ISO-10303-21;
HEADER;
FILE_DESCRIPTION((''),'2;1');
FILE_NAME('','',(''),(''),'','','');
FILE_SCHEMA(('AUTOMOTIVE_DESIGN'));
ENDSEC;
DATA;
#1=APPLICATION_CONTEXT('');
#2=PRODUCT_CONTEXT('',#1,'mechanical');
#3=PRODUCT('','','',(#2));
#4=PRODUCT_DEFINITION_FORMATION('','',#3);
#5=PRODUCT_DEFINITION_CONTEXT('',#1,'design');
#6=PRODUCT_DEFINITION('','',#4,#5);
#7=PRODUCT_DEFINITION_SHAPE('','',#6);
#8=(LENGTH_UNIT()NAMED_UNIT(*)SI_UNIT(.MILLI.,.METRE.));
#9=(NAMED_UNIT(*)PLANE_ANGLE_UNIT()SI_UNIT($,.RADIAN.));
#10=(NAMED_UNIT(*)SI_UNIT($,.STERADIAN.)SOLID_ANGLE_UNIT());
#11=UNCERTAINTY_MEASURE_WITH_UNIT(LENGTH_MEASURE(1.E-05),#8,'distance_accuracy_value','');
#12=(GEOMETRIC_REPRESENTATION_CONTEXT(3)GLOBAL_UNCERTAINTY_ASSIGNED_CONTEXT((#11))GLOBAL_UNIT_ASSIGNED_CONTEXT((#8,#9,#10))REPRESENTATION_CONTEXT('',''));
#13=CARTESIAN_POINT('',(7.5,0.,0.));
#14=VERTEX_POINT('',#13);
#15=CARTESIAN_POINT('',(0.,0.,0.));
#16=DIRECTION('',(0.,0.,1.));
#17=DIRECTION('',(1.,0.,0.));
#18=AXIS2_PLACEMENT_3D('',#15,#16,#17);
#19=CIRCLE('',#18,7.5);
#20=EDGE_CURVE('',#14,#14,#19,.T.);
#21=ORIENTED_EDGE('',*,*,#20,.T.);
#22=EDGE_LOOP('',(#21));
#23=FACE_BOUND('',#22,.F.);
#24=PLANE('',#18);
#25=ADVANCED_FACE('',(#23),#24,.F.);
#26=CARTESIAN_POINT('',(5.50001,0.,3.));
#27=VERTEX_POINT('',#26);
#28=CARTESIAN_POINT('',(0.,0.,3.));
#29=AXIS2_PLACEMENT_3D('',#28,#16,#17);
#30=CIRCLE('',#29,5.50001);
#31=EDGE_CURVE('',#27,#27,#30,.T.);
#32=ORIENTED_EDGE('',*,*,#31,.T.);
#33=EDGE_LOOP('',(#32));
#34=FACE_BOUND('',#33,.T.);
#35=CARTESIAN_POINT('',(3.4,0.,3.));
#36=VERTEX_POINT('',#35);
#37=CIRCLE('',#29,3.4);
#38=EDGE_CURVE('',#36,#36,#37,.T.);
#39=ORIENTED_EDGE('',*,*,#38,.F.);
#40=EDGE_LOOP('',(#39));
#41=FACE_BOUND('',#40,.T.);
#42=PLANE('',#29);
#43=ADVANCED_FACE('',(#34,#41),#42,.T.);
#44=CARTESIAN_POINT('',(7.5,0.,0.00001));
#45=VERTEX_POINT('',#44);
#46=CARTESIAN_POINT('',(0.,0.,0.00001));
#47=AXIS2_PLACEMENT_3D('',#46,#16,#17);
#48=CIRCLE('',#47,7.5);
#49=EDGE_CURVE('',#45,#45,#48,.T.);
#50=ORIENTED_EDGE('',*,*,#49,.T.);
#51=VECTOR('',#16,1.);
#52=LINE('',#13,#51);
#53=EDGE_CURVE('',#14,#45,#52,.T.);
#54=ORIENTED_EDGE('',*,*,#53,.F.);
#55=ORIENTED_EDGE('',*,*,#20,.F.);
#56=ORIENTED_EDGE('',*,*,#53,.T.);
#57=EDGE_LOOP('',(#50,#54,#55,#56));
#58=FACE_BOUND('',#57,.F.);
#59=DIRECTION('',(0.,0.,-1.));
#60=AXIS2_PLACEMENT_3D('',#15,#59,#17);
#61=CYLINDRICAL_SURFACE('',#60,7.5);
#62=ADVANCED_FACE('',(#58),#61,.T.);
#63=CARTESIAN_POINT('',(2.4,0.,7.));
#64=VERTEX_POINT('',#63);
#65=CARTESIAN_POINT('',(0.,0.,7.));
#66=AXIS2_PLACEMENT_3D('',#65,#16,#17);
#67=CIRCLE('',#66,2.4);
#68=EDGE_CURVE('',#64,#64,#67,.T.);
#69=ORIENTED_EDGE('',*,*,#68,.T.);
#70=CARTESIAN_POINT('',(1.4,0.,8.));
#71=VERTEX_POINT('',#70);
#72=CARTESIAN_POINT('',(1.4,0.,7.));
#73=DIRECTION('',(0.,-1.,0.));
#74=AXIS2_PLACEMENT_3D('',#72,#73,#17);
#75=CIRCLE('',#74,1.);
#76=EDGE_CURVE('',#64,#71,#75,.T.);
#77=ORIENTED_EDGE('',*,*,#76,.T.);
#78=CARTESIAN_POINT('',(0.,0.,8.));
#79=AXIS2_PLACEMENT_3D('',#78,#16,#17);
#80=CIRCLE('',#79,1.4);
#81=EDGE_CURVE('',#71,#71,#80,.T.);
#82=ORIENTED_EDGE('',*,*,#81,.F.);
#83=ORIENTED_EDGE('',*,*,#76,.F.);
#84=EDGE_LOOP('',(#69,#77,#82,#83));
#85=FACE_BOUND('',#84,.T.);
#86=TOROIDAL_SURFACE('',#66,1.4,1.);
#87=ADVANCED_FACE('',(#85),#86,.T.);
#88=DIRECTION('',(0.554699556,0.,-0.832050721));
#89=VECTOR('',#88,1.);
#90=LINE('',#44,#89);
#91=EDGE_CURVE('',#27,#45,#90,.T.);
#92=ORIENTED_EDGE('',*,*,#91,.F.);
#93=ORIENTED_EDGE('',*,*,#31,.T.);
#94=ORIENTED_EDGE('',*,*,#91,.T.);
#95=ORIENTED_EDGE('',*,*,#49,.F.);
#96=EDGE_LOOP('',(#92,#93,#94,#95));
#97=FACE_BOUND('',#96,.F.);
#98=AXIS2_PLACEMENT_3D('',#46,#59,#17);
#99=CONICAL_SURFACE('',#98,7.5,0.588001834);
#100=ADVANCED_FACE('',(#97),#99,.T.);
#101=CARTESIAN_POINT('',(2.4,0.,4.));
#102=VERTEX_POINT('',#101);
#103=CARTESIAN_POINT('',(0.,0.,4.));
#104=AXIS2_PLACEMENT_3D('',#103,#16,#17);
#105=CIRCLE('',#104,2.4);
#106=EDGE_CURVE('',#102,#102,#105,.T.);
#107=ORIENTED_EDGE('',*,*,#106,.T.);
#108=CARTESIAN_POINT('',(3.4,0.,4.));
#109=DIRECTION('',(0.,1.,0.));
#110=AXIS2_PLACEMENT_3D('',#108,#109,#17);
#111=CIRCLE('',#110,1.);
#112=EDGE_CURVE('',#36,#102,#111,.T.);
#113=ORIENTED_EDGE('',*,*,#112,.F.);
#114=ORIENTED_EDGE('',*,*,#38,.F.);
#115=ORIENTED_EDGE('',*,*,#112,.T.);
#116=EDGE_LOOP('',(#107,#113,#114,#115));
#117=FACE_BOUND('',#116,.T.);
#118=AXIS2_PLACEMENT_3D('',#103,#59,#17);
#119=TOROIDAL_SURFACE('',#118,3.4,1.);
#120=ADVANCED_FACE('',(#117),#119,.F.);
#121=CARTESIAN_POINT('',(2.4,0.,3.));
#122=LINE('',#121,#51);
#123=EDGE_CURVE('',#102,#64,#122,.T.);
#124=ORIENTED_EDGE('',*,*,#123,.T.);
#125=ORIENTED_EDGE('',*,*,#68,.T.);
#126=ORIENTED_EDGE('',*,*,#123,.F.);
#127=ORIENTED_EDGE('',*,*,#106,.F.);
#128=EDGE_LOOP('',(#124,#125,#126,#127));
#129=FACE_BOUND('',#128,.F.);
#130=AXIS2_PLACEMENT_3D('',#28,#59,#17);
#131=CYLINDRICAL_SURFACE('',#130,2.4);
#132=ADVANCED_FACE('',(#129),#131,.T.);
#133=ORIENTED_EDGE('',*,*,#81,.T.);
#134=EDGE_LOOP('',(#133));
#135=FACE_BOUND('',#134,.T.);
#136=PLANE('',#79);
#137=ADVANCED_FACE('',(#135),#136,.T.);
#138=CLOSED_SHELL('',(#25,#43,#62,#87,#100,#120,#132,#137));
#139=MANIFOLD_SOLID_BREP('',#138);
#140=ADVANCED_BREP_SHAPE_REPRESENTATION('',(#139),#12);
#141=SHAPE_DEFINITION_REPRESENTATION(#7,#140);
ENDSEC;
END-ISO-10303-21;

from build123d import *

# Parameters (mm, degrees)
F0_R     = 7.5
F1_DEPTH = 3
F2_SIZE2 = 2.99999
F2_SIZE  = 1.99999
F3_R     = 2.4
F4_DEPTH = 5
F5_R     = 1


# Not quite as in the source:
# - a fillet or chamfer is up to 0.001 mm smaller than in the source, because OpenCascade refuses the exact size


with BuildPart() as f1:
    # F0 (on Top) → F1 (new body)
    with BuildSketch(Plane.XY):
        Circle(F0_R)
    extrude(amount=F1_DEPTH)

    # F2 (size 2 and 3 in the source; OpenCascade refuses exactly that, so slightly less here)
    f2_edges = [f1.edges().sort_by_distance(p)[0] for p in [
        (-7.5, 0, 3),
    ]]
    f2_side = f1.faces().sort_by_distance((0, 0, 3))[0]
    chamfer(f2_edges, length=F2_SIZE, length2=F2_SIZE2, reference=f2_side)

    # F3 (on face) → F4 (join)
    with BuildSketch(Plane.XY.offset(3)):
        Circle(F3_R)
    extrude(amount=F4_DEPTH)

    # F5
    f5_edges = [f1.edges().sort_by_distance(p)[0] for p in [
        (-2.4, 0, 8),
        (-2.4, 0, 3),
    ]]
    fillet(f5_edges, radius=F5_R)


solid = f1.part
